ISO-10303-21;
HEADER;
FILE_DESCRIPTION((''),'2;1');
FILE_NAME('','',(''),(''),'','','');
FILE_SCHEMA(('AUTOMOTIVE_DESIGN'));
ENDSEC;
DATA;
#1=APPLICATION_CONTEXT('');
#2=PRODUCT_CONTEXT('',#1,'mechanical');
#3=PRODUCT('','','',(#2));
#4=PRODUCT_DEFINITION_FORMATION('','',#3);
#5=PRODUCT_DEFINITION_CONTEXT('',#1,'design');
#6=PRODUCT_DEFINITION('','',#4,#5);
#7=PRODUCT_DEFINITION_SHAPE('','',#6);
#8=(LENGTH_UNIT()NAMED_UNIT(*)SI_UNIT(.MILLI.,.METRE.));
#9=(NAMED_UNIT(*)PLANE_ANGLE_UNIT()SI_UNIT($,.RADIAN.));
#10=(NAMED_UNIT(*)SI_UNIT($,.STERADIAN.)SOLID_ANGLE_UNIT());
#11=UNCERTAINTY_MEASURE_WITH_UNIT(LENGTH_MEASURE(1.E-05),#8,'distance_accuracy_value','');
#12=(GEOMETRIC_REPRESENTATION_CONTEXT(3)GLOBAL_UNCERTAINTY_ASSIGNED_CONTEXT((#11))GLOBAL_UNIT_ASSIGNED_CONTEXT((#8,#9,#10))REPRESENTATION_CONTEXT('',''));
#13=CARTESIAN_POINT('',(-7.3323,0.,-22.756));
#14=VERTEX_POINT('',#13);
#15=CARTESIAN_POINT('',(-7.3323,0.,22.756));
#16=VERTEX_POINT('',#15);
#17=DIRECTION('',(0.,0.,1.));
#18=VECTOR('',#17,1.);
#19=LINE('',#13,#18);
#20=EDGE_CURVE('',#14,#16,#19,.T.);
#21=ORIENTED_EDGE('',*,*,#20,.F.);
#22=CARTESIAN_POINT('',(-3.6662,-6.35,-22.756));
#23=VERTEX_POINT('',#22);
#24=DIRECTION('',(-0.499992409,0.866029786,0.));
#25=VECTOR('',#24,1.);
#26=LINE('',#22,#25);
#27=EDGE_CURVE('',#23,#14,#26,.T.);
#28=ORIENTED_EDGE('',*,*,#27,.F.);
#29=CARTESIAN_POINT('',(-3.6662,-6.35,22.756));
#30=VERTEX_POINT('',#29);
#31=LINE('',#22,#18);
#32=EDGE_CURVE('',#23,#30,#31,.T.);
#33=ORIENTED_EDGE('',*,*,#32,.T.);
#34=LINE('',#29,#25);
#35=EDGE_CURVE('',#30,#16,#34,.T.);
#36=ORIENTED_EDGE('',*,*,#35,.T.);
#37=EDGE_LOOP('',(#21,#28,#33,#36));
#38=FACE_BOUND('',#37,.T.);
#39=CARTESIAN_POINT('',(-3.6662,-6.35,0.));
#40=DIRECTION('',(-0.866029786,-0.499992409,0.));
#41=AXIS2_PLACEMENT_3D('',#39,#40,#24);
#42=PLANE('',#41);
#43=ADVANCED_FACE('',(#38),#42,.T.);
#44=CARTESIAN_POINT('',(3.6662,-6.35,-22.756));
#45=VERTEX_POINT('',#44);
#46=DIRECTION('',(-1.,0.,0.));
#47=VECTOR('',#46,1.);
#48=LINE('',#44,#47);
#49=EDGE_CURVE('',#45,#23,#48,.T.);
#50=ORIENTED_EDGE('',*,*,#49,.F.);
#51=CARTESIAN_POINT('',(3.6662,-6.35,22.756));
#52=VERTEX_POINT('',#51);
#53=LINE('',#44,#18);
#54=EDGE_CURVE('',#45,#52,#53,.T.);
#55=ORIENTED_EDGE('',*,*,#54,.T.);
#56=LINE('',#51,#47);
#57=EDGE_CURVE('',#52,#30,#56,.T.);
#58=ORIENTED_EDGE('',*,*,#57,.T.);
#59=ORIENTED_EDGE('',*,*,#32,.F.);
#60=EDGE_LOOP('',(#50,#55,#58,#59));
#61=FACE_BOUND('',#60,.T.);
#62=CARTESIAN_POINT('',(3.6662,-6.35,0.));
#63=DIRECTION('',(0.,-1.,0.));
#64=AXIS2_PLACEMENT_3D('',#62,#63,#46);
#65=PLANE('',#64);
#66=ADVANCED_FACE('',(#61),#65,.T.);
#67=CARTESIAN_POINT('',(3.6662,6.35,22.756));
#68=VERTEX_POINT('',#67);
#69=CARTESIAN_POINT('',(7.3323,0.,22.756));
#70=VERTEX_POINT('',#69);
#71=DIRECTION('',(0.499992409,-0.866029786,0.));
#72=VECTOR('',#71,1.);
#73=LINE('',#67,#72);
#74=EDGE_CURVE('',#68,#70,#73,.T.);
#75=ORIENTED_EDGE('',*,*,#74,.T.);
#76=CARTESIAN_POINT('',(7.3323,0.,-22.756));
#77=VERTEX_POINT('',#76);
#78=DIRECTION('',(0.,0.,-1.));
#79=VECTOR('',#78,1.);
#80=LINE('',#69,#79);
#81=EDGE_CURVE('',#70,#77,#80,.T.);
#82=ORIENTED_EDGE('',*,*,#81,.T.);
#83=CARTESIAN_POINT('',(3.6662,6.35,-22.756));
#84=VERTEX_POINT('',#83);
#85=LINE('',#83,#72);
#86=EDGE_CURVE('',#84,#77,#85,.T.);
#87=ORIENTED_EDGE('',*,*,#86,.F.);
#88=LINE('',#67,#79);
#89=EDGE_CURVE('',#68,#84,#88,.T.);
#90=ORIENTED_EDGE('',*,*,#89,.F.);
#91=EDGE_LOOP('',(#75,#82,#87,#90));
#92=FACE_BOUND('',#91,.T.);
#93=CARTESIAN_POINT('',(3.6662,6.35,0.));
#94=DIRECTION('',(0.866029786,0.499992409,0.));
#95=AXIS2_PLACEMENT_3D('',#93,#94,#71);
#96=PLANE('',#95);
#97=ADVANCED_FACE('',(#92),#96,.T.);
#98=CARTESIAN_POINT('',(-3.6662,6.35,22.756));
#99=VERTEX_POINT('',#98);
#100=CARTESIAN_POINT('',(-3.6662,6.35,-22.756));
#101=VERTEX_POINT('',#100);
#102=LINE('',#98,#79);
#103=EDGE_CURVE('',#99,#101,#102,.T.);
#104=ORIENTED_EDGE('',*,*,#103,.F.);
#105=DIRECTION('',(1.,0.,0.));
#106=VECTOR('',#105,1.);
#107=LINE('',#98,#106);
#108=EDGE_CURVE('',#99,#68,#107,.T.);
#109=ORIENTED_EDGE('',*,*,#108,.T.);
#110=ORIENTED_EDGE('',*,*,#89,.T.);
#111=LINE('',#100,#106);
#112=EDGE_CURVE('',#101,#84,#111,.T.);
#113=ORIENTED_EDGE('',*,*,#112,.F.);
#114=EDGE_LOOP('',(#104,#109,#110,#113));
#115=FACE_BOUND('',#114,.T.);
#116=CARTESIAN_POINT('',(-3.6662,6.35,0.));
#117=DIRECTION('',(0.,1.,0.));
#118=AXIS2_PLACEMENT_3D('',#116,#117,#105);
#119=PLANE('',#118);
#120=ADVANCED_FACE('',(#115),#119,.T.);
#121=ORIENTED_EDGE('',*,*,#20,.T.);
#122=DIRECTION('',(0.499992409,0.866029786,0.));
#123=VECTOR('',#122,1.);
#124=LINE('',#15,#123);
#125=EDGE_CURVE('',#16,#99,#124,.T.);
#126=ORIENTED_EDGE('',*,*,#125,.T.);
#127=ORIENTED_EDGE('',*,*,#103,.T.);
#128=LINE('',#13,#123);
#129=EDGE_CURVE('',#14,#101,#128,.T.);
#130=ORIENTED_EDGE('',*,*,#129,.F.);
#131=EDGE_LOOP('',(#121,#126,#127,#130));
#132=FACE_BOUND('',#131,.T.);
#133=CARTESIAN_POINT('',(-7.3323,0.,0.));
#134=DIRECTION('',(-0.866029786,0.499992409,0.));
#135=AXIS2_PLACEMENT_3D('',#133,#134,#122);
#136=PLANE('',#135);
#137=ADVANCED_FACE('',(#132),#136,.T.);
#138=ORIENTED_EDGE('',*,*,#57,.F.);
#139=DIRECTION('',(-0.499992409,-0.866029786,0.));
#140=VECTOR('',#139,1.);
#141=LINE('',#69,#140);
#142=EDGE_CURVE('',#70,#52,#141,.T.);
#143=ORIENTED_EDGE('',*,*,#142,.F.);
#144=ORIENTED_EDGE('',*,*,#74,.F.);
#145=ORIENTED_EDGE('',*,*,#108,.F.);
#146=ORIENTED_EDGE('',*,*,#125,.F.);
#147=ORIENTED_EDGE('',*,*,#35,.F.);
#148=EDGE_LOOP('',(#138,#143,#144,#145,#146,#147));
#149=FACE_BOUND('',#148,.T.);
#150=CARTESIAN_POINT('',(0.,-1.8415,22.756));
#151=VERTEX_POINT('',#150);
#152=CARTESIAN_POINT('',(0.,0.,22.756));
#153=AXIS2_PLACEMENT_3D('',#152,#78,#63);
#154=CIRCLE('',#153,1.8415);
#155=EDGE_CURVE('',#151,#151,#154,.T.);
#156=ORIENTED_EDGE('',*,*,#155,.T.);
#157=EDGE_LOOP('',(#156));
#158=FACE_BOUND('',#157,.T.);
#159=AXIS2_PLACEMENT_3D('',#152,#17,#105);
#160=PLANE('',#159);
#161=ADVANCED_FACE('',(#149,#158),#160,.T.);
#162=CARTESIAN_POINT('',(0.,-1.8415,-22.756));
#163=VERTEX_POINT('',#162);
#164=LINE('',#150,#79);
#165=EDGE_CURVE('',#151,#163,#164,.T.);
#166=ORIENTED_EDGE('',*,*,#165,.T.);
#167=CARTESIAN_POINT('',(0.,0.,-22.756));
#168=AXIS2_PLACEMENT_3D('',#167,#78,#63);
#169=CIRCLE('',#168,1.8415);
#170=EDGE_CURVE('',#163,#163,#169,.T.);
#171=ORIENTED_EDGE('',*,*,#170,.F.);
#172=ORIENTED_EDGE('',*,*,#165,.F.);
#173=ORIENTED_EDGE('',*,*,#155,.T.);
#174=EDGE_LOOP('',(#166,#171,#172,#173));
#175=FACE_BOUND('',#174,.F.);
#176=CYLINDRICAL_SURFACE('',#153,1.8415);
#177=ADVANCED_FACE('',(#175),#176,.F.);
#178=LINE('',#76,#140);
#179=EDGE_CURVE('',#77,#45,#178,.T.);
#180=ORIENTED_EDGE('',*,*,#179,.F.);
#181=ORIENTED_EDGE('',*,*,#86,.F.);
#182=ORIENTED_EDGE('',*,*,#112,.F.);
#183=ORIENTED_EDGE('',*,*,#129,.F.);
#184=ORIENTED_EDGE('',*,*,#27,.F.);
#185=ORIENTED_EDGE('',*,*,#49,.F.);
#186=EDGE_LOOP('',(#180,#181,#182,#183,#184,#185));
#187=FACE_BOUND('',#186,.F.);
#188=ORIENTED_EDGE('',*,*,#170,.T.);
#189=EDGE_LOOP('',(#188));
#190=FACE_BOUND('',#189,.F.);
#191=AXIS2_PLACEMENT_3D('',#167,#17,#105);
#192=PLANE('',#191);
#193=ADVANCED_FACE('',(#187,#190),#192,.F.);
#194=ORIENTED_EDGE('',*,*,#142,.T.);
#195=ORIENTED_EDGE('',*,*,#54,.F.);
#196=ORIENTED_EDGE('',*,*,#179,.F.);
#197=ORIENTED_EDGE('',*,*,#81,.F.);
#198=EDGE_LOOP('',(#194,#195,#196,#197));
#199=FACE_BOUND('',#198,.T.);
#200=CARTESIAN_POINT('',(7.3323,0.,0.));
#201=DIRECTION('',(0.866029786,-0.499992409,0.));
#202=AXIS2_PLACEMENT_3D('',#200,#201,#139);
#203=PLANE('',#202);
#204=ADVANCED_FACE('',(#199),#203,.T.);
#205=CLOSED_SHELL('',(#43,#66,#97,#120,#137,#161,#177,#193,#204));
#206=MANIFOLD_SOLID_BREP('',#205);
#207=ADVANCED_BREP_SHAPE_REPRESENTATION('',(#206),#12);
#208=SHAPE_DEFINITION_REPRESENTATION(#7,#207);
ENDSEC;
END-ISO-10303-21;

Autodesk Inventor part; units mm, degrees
ref_plane "YZ Plane" through (0, 0, 0) normal (1, 0, 0) x (0, 1, 0)
ref_plane "XZ Plane" through (0, 0, 0) normal (0, 1, 0) x (-1, 0, 0)
ref_plane "XY Plane" through (0, 0, 0) normal (0, 0, 1) x (1, 0, 0)
sketch "Sketch1" plane through (0, 0, 0) normal (0, 0, 1) x (1, 0, 0)
  line L0 (-7.3323, 0) -> (-3.6662, 6.35)
  line L1 (-3.6662, 6.35) -> (3.6662, 6.35)
  line L2 (3.6662, 6.35) -> (7.3323, 0)
  line L3 (7.3323, 0) -> (3.6662, -6.35)
  line L4 (3.6662, -6.35) -> (-3.6662, -6.35)
  line L5 (-3.6662, -6.35) -> (-7.3323, 0)
  point P0 (0, 0)
  point P1 (0, 0)
  dimension "d0" = 12.7
extrude "Extrusion1" add sketch "Sketch1" along normal mid plane 45.512
sketch "Sketch2" plane through (0, 0, 22.756) normal (0, 0, 1) x (1, 0, 0)
  point P0 (0, 0)
hole "Hole1" at (0, 0, 22.756) direction (0, 0, -1) diameter 3.683 end through all thread size "10-24 UNC" class "2B" standard "ANSI Unified Screw Threads"
mirror "Mirror1" about plane through (0, 0, 0) normal (0, 0, 1) of "Hole1"
properties part number "PULLY_HEX_SHAFT_INTAKE" material "Aluminum, 6061-T6"
